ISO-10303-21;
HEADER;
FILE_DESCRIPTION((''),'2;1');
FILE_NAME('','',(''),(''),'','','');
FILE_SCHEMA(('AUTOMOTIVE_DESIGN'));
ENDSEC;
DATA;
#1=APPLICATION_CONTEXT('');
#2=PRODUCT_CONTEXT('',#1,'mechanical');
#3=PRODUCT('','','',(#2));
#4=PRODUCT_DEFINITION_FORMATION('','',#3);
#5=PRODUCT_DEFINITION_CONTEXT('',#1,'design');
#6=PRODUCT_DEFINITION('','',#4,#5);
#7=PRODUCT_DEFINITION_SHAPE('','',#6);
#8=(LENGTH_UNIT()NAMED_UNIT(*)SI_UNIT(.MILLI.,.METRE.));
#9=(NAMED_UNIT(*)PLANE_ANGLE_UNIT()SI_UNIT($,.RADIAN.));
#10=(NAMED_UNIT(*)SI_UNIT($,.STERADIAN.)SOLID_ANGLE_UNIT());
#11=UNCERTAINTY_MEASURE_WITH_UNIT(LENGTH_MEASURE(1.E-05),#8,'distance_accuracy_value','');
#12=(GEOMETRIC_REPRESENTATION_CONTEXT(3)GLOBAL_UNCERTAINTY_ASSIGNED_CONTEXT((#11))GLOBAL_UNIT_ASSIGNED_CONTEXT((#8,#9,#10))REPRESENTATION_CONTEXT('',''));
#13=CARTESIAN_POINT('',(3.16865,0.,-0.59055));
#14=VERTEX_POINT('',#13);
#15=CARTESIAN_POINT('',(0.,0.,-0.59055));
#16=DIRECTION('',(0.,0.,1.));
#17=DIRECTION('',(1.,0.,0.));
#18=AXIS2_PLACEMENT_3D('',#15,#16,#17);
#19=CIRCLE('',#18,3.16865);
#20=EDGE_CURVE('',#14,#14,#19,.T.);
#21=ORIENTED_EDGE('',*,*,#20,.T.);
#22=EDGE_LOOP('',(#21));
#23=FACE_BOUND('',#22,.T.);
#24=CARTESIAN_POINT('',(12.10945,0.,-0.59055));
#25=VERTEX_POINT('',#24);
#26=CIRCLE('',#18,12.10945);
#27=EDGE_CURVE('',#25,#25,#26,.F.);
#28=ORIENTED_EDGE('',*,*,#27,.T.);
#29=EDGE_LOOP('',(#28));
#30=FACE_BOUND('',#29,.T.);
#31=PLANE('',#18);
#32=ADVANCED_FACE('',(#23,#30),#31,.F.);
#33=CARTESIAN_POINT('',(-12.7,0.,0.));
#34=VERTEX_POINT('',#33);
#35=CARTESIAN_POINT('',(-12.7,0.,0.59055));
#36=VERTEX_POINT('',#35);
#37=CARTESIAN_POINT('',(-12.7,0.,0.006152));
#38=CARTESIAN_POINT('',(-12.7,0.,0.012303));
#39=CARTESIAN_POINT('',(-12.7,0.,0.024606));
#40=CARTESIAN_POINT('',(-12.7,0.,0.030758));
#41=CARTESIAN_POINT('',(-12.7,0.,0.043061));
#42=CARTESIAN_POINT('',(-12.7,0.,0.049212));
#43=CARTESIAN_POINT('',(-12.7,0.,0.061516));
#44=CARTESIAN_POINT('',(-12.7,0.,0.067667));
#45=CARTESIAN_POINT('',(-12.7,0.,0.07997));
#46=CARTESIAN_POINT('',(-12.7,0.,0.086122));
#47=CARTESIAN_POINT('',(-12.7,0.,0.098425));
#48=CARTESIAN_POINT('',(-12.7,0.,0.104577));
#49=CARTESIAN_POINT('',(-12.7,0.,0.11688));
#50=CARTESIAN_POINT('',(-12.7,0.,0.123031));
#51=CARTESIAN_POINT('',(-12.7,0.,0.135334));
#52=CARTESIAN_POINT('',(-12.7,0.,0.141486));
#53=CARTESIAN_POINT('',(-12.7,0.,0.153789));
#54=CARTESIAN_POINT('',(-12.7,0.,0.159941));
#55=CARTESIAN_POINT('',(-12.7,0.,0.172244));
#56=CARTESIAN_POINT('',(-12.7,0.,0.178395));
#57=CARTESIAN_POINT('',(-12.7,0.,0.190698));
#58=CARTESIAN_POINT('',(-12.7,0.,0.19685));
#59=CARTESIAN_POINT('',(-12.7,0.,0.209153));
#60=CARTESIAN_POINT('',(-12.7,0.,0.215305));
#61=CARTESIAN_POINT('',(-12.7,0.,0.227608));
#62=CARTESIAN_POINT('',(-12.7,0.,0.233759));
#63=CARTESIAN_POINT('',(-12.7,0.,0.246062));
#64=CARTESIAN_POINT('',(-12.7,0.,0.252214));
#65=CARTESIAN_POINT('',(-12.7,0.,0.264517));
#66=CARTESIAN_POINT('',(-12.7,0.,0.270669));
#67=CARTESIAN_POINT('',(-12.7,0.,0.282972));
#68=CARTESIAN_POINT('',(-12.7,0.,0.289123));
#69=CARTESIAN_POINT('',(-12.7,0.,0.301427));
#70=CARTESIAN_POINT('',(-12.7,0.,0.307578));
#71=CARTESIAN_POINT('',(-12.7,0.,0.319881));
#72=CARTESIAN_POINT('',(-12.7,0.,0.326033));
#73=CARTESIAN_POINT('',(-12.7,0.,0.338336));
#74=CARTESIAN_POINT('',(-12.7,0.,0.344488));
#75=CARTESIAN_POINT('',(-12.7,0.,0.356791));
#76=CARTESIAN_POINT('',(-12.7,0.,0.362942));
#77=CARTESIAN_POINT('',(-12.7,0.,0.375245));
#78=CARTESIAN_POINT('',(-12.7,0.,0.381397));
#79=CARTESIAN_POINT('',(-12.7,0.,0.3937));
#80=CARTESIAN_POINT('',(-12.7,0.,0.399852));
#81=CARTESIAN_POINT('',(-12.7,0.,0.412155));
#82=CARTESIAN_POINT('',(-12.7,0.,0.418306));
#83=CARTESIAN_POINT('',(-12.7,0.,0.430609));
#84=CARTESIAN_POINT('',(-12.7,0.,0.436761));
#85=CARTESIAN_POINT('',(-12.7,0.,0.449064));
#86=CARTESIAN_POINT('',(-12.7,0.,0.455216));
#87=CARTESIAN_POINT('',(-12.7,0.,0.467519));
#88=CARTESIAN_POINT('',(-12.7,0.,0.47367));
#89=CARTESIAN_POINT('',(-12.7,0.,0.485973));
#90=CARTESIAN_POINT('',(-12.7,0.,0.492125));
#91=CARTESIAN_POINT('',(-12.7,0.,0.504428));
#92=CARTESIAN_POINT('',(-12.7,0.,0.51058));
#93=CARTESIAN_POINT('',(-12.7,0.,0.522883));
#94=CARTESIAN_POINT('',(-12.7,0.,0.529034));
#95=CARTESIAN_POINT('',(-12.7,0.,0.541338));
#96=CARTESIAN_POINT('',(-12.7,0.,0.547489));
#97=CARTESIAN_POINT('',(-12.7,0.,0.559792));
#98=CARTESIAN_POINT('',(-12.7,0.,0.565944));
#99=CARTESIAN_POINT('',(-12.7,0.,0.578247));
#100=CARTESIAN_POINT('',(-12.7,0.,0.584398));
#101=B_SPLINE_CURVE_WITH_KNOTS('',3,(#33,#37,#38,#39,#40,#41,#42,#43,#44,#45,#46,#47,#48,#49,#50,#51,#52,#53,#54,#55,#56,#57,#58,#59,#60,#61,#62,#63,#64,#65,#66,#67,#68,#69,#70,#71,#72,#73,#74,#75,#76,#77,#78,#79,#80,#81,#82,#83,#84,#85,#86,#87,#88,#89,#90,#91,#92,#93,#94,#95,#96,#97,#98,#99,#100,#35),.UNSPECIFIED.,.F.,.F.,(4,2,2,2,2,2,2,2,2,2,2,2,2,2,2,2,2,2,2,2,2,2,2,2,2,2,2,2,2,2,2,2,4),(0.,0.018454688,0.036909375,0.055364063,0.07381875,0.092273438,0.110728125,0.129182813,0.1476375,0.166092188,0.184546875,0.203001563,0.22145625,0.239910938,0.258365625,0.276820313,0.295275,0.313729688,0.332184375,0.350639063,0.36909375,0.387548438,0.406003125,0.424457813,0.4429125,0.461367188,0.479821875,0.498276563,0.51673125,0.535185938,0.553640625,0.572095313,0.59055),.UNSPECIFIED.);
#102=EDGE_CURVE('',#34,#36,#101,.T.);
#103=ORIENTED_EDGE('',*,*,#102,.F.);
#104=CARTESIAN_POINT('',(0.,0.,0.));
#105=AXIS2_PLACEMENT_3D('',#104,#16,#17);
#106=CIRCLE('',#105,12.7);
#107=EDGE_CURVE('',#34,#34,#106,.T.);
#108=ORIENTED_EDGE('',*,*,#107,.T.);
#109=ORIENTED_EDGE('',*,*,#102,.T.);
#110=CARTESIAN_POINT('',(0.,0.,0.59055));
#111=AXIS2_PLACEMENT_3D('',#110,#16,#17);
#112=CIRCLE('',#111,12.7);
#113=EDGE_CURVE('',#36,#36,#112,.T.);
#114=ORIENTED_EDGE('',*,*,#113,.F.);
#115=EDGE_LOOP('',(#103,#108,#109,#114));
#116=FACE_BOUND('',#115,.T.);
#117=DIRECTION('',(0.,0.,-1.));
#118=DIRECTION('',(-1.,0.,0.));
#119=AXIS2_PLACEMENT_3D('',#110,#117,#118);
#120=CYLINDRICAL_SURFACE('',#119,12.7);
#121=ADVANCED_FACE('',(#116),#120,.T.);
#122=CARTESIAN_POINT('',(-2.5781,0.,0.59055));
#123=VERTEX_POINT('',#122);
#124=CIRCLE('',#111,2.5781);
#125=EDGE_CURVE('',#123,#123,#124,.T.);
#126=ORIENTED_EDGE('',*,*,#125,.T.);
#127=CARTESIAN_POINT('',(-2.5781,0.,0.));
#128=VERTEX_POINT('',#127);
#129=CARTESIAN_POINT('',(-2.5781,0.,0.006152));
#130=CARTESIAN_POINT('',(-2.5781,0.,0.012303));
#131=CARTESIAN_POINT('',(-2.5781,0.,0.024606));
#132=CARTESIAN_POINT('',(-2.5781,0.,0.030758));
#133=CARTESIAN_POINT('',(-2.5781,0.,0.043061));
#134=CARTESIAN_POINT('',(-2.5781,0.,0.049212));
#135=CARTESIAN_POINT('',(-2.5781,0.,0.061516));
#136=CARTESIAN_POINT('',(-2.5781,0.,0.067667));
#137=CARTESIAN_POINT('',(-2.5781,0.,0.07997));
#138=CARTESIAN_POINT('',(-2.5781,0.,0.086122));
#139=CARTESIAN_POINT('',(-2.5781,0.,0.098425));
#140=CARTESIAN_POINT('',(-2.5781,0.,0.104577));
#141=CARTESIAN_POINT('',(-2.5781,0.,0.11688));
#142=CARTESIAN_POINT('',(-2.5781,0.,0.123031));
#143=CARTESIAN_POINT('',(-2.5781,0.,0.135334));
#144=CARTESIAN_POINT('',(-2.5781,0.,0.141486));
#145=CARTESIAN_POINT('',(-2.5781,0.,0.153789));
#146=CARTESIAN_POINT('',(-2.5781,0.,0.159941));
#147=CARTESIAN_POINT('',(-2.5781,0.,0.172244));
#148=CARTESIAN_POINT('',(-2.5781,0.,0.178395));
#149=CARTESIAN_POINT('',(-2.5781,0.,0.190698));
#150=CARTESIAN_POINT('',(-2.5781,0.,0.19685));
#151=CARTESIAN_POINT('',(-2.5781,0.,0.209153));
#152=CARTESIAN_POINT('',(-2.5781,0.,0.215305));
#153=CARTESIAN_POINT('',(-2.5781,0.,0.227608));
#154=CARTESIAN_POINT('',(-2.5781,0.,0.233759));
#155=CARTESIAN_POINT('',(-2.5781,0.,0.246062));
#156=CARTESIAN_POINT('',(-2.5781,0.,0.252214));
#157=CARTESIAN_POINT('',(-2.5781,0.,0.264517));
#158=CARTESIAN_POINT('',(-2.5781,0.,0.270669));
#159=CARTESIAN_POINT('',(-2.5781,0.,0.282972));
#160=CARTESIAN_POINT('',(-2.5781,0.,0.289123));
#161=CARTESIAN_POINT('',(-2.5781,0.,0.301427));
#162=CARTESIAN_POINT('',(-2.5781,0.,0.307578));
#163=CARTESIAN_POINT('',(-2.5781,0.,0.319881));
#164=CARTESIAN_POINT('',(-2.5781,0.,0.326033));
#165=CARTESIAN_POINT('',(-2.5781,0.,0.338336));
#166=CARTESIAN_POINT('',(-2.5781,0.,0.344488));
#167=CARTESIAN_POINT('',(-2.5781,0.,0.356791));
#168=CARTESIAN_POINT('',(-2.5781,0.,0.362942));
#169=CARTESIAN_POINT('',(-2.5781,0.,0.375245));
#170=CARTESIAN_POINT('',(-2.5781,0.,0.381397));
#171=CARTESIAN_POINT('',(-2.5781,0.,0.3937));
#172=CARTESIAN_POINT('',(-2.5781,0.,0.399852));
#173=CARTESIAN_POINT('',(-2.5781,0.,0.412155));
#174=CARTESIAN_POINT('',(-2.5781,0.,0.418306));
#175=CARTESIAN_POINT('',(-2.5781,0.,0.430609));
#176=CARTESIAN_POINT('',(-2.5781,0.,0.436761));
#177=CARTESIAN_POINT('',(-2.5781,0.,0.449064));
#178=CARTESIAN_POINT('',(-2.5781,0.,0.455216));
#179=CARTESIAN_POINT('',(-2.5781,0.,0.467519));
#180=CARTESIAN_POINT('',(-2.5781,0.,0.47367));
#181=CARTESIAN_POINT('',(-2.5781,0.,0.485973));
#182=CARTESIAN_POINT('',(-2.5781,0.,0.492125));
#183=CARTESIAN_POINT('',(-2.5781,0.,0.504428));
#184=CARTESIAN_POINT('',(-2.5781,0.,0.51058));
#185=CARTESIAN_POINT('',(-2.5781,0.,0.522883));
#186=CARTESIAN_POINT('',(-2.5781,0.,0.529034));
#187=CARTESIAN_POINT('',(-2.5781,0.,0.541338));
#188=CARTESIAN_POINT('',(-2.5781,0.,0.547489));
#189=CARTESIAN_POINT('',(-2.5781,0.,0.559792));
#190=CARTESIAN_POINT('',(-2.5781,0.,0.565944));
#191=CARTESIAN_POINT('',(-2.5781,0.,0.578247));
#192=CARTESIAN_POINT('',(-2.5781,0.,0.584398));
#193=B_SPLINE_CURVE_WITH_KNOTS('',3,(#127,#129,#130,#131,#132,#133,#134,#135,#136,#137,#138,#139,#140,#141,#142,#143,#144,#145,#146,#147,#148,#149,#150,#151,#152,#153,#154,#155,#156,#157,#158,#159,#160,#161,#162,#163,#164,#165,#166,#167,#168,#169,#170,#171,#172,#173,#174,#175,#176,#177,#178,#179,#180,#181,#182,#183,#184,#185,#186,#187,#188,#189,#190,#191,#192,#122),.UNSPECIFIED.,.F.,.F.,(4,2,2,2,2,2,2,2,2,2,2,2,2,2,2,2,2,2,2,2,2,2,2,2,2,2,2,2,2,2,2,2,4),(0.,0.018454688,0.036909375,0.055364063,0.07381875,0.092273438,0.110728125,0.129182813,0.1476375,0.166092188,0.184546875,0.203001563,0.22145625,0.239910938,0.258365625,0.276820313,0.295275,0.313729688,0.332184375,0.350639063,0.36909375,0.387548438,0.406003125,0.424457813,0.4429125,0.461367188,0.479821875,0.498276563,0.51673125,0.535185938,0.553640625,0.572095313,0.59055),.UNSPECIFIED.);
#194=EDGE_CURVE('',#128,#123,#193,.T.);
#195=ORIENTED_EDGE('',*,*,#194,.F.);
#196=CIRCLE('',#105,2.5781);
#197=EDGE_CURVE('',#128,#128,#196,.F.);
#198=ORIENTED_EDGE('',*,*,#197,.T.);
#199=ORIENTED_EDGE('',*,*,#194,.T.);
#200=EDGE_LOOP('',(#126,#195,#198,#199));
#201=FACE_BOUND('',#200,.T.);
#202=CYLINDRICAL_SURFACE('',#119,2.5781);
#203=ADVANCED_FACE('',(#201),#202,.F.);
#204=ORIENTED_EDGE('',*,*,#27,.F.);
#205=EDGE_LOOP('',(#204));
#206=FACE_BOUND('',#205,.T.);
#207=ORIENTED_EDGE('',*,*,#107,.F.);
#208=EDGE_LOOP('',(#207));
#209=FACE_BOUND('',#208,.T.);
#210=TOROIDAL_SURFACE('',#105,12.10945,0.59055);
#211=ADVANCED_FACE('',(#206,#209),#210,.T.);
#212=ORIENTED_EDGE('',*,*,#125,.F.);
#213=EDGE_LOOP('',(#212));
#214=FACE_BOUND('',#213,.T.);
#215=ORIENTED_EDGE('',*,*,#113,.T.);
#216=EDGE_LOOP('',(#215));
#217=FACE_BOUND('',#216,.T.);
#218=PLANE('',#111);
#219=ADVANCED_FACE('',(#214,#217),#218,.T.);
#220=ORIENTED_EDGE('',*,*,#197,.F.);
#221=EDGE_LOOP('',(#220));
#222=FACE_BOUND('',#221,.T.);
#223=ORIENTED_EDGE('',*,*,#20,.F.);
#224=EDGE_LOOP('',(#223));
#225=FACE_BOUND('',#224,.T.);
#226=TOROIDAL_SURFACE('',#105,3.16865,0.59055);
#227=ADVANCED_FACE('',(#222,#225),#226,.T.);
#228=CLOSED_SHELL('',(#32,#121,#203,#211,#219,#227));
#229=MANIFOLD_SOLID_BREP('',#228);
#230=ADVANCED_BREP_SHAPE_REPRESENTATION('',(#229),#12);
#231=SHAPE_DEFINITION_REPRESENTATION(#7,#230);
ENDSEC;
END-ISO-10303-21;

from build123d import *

# Parameters (mm, degrees)
BOSS_EXTRUDE1_DEPTH      = 0.59055
BOSS_EXTRUDE1_DEPTH_BACK = 0.59055
SKETCH3_R                = 12.7
SKETCH3_R_2              = 2.5781
FILLET1_R                = 0.59055


with BuildPart() as part:
    # Sketch3 → Boss-Extrude1 (new, two sides: drawn at the far end of the back side and taken through both)
    with BuildSketch(Plane.XY.offset(-BOSS_EXTRUDE1_DEPTH_BACK)):
        with Locations(Location((0, 0, 0), (0, 0, 180))):
            Circle(SKETCH3_R)
        with Locations(Location((0, 0, 0), (0, 0, 180))):
            Circle(SKETCH3_R_2, mode=Mode.SUBTRACT)
    extrude(amount=BOSS_EXTRUDE1_DEPTH + BOSS_EXTRUDE1_DEPTH_BACK)

    # Fillet1
    fillet1_edges = [part.edges().sort_by_distance(p)[0] for p in [
        (12.7, 0, -0.59055),
        (2.5781, 0, -0.59055),
    ]]
    fillet(fillet1_edges, radius=FILLET1_R - 0.0001)  # a hair under: the kernel refuses the full size


solid = part.part
